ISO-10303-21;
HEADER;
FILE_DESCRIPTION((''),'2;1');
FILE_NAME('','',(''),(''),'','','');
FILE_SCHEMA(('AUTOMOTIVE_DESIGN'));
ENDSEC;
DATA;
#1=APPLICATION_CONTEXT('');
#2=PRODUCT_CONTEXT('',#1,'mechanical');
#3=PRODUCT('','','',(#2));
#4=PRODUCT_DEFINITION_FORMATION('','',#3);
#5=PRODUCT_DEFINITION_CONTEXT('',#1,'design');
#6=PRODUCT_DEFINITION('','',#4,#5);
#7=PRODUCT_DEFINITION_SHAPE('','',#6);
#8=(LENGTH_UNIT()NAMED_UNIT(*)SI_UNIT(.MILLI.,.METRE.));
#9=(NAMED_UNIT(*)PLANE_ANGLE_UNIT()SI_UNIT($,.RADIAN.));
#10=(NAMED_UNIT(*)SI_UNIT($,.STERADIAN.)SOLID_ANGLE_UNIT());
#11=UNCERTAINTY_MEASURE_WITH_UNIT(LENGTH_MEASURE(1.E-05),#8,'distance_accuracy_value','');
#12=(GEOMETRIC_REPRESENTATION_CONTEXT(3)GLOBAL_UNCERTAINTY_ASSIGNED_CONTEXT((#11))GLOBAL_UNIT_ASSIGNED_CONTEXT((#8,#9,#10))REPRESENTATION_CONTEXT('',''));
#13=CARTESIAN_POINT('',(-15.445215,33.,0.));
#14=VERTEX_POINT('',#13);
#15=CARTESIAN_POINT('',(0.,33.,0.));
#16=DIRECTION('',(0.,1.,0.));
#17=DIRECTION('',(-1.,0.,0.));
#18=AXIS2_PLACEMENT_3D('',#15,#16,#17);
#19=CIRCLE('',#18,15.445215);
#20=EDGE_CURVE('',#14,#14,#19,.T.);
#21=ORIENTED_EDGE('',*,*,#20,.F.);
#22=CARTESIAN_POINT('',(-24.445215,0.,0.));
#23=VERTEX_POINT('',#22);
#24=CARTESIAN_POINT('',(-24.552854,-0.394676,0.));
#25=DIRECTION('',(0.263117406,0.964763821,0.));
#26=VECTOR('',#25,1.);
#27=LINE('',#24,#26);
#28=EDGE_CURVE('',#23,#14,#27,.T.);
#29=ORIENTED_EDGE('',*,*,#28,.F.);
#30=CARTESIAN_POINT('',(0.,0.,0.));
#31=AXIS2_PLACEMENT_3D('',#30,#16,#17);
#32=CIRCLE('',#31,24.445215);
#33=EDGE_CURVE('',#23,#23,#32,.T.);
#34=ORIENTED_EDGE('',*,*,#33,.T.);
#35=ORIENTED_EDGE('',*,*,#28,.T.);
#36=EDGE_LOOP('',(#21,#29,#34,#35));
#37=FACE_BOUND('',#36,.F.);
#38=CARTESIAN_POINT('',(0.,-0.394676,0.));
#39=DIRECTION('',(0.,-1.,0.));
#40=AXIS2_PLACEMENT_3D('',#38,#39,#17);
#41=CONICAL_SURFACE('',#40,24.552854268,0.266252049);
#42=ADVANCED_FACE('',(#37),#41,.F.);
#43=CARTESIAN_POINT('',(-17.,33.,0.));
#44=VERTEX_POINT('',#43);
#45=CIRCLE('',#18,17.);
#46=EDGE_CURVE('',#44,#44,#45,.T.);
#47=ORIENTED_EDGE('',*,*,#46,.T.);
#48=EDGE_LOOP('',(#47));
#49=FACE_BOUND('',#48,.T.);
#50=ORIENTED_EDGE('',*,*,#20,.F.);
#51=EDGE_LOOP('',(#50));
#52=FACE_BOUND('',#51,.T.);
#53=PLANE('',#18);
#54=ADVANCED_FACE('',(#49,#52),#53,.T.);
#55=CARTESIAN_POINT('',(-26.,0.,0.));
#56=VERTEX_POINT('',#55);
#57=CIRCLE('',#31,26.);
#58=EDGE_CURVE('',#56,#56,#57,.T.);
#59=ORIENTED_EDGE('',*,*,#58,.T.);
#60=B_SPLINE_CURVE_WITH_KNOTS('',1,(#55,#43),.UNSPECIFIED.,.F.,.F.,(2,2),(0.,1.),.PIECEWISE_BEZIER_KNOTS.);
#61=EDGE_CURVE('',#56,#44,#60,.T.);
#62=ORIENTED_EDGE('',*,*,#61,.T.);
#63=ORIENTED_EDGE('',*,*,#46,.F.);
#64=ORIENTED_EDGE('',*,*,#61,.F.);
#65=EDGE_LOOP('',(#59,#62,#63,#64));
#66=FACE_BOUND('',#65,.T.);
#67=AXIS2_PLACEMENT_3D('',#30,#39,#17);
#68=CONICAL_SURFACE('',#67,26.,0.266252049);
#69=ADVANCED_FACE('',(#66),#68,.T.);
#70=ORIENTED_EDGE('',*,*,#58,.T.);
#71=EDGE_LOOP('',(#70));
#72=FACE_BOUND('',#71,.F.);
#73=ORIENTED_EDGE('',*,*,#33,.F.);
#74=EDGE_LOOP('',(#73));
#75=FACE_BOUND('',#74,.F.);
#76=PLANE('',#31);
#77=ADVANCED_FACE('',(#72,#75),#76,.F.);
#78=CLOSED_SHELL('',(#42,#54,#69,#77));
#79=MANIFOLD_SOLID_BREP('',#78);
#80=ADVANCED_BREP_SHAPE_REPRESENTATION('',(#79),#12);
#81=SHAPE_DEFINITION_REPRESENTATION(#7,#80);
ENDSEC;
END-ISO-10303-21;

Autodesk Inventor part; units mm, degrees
ref_plane "YZ Plane" through (0, 0, 0) normal (1, 0, 0) x (0, 1, 0)
ref_plane "XY Plane" through (0, 0, 0) normal (0, 0, 1) x (1, 0, 0)
sketch "Szkic6" plane through (0, 0, 0) normal (0, 1, 0) x (-1, 0, 0)
  circle A0 centre (0, 0) radius 26
  dimension "d33" = 52
ref_plane "Płaszczyzna konstrukcyjna1" through (0, 33, 0) normal (0, 1, 0) x (-1, 0, 0)
sketch "Szkic7" plane through (0, 33, 0) normal (0, 1, 0) x (-1, 0, 0)
  circle A0 centre (0, 0) radius 17
  dimension "d35" = 34
loft "Wyciągnięcie złożone1" add profiles "Szkic6", "Szkic7"
shell "Skorupa1" thickness 1.5 removed faces 2 at (6.0401, 33, -5.7878) at (2.9724, 0, 4.9305)
equation "\"d33\" = OD1"
equation "\"d35\" = OD2"
equation "\"d52\" = THK"
equation "\"SzerokośćGięciaPodcięcia\" = Grubość"
equation "\"RozmiarPodcięciaNarożnika\" = 4 * Grubość"
equation "\"PromieńPrzejścia\" = PromieńGięcia"
equation "\"Rozmiar_promienia_Jacobiego\" = PromieńGięcia"
equation "\"Wielk_odstępu\" = Grubość"
equation "\"d2\" = PromieńGięcia"
equation "\"d23\" = PromieńGięcia"
equation "\"OD1\" = 52"
equation "\"OD2\" = 34"
equation "\"L\" = 33"
equation "\"THK\" = 1.5"
equation "\"d34\" = L"
equation "\"Grubość\" = 1.5"
equation "\"PromieńGięcia\" = 3"
properties part number "Redukcja symetryczna Ø52x34x1,5 L=33" material "304"
